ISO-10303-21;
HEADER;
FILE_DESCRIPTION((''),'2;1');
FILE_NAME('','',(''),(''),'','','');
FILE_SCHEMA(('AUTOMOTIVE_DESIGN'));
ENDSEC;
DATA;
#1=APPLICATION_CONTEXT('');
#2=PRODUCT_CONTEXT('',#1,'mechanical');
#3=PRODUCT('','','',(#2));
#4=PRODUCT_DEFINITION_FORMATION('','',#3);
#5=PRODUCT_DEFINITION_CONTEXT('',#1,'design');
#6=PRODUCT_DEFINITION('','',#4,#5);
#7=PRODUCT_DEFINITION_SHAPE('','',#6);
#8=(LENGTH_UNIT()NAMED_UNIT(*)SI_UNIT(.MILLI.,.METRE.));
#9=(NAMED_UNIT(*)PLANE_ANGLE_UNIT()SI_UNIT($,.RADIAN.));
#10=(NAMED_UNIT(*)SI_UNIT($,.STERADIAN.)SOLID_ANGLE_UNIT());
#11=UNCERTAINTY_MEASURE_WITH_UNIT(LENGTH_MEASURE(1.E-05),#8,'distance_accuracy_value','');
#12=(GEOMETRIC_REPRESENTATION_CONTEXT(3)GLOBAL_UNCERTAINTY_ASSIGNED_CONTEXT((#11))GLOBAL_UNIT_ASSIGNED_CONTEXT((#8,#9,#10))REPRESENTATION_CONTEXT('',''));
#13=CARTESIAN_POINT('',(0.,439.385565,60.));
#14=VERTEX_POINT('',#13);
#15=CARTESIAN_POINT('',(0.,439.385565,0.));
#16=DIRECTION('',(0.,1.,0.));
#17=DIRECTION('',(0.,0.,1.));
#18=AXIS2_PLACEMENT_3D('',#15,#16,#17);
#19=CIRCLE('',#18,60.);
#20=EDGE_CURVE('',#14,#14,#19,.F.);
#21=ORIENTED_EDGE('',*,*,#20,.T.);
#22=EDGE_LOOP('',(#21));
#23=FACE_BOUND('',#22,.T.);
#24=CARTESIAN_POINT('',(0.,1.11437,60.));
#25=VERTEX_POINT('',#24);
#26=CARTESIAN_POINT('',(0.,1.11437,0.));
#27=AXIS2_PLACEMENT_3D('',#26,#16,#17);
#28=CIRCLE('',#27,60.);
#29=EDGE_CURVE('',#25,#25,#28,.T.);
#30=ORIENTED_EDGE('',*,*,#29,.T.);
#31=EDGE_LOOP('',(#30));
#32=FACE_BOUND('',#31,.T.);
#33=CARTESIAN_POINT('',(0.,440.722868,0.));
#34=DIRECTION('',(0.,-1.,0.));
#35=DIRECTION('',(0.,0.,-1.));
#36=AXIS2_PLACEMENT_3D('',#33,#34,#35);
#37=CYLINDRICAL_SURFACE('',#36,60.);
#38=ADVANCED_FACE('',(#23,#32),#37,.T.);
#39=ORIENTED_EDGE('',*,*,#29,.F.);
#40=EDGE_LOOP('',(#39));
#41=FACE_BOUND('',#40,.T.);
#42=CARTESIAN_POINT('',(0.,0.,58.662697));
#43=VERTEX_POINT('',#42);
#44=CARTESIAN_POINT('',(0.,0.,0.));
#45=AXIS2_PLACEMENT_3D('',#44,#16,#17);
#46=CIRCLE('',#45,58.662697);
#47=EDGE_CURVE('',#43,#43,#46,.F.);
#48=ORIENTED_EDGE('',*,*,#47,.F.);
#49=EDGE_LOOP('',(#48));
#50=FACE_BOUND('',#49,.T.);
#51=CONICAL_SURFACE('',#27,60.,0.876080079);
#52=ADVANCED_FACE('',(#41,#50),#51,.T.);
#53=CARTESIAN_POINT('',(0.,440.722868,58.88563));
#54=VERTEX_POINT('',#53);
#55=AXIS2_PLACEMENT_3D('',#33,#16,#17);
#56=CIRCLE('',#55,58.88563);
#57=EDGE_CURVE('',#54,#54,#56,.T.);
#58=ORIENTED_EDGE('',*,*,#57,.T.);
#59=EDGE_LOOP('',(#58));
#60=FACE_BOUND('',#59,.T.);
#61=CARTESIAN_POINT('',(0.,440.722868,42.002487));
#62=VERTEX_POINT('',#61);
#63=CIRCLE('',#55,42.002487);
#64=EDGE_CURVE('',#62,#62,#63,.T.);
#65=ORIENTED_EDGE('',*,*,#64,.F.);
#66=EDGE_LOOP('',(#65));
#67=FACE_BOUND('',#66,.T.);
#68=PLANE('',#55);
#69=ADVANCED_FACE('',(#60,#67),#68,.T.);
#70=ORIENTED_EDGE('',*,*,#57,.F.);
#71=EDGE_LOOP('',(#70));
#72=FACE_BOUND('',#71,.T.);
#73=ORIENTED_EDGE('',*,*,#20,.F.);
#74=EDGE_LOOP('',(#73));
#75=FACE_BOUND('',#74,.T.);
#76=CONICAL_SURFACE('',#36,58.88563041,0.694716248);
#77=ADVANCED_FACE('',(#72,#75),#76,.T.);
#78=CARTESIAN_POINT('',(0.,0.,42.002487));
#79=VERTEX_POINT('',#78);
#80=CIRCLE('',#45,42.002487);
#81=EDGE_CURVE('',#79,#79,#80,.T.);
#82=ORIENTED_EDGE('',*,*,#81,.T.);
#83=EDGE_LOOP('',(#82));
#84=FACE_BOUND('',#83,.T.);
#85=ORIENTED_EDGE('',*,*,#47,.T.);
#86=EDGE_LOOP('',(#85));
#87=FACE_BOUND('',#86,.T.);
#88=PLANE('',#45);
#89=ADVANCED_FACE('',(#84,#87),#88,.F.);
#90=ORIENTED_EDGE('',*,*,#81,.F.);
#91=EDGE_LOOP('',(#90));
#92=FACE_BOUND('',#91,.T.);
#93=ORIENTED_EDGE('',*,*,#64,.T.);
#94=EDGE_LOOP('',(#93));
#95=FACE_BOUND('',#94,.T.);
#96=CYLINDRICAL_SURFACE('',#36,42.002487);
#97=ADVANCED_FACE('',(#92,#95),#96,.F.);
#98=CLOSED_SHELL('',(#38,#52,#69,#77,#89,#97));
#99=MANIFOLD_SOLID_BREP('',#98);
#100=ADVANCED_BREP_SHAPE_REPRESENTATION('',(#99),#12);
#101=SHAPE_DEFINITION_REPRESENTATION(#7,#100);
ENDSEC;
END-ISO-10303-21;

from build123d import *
from OCP.BRepFilletAPI import BRepFilletAPI_MakeChamfer

# Parameters (mm, degrees)
SKETCH1_R           = 60
BOSS_EXTRUDE1_DEPTH = 440.722868494
SKETCH2_R           = 42.002486627
CUT_EXTRUDE1_DEPTH  = 449.816941317
CHAMFER1_SIZE       = 1.337303405
CHAMFER1_SIZE2      = 1.11436959


with BuildPart() as part:
    # Sketch1 → Boss-Extrude1 (new body)
    with BuildSketch(Plane(origin=(0, 0, 0), x_dir=(1, 0, 0), z_dir=(0, 1, 0))):
        Circle(SKETCH1_R)
    extrude(amount=BOSS_EXTRUDE1_DEPTH)

    # Sketch2 → Cut-Extrude1 (cut, through all)
    with BuildSketch(Plane(origin=(0, 0, 0), x_dir=(1, 0, 0), z_dir=(0, 1, 0))):
        Circle(SKETCH2_R)
    extrude(amount=CUT_EXTRUDE1_DEPTH, mode=Mode.SUBTRACT)

    # Chamfer1: one chamfer whose edges measure the first distance from different faces: ONE call of the kernel's chamfer builder (chamfer() names one face for all edges)
    chamfer1_edges_1 = [part.edges().sort_by_distance(p)[0] for p in [
        (-60, 440.722868494, 0),
    ]]
    chamfer1_side_1 = [part.faces().sort_by_distance(p)[0] for p in [
        (-60, 220.361434247, 0),
    ]]
    chamfer1_edges_2 = [part.edges().sort_by_distance(p)[0] for p in [
        (-60, 0, 0),
    ]]
    chamfer1_side_2 = [part.faces().sort_by_distance(p)[0] for p in [
        (-58.302943725, 0, 0),
    ]]
    chamfer1 = BRepFilletAPI_MakeChamfer(part.part.solid().wrapped)
    for e in chamfer1_edges_1:
        chamfer1.Add(CHAMFER1_SIZE, CHAMFER1_SIZE2, e.wrapped, chamfer1_side_1[0].wrapped)  # the first distance lies on this face
    for e in chamfer1_edges_2:
        chamfer1.Add(CHAMFER1_SIZE, CHAMFER1_SIZE2, e.wrapped, chamfer1_side_2[0].wrapped)  # the first distance lies on this face
    add(Compound.cast(chamfer1.Shape()), mode=Mode.REPLACE)


solid = part.part
